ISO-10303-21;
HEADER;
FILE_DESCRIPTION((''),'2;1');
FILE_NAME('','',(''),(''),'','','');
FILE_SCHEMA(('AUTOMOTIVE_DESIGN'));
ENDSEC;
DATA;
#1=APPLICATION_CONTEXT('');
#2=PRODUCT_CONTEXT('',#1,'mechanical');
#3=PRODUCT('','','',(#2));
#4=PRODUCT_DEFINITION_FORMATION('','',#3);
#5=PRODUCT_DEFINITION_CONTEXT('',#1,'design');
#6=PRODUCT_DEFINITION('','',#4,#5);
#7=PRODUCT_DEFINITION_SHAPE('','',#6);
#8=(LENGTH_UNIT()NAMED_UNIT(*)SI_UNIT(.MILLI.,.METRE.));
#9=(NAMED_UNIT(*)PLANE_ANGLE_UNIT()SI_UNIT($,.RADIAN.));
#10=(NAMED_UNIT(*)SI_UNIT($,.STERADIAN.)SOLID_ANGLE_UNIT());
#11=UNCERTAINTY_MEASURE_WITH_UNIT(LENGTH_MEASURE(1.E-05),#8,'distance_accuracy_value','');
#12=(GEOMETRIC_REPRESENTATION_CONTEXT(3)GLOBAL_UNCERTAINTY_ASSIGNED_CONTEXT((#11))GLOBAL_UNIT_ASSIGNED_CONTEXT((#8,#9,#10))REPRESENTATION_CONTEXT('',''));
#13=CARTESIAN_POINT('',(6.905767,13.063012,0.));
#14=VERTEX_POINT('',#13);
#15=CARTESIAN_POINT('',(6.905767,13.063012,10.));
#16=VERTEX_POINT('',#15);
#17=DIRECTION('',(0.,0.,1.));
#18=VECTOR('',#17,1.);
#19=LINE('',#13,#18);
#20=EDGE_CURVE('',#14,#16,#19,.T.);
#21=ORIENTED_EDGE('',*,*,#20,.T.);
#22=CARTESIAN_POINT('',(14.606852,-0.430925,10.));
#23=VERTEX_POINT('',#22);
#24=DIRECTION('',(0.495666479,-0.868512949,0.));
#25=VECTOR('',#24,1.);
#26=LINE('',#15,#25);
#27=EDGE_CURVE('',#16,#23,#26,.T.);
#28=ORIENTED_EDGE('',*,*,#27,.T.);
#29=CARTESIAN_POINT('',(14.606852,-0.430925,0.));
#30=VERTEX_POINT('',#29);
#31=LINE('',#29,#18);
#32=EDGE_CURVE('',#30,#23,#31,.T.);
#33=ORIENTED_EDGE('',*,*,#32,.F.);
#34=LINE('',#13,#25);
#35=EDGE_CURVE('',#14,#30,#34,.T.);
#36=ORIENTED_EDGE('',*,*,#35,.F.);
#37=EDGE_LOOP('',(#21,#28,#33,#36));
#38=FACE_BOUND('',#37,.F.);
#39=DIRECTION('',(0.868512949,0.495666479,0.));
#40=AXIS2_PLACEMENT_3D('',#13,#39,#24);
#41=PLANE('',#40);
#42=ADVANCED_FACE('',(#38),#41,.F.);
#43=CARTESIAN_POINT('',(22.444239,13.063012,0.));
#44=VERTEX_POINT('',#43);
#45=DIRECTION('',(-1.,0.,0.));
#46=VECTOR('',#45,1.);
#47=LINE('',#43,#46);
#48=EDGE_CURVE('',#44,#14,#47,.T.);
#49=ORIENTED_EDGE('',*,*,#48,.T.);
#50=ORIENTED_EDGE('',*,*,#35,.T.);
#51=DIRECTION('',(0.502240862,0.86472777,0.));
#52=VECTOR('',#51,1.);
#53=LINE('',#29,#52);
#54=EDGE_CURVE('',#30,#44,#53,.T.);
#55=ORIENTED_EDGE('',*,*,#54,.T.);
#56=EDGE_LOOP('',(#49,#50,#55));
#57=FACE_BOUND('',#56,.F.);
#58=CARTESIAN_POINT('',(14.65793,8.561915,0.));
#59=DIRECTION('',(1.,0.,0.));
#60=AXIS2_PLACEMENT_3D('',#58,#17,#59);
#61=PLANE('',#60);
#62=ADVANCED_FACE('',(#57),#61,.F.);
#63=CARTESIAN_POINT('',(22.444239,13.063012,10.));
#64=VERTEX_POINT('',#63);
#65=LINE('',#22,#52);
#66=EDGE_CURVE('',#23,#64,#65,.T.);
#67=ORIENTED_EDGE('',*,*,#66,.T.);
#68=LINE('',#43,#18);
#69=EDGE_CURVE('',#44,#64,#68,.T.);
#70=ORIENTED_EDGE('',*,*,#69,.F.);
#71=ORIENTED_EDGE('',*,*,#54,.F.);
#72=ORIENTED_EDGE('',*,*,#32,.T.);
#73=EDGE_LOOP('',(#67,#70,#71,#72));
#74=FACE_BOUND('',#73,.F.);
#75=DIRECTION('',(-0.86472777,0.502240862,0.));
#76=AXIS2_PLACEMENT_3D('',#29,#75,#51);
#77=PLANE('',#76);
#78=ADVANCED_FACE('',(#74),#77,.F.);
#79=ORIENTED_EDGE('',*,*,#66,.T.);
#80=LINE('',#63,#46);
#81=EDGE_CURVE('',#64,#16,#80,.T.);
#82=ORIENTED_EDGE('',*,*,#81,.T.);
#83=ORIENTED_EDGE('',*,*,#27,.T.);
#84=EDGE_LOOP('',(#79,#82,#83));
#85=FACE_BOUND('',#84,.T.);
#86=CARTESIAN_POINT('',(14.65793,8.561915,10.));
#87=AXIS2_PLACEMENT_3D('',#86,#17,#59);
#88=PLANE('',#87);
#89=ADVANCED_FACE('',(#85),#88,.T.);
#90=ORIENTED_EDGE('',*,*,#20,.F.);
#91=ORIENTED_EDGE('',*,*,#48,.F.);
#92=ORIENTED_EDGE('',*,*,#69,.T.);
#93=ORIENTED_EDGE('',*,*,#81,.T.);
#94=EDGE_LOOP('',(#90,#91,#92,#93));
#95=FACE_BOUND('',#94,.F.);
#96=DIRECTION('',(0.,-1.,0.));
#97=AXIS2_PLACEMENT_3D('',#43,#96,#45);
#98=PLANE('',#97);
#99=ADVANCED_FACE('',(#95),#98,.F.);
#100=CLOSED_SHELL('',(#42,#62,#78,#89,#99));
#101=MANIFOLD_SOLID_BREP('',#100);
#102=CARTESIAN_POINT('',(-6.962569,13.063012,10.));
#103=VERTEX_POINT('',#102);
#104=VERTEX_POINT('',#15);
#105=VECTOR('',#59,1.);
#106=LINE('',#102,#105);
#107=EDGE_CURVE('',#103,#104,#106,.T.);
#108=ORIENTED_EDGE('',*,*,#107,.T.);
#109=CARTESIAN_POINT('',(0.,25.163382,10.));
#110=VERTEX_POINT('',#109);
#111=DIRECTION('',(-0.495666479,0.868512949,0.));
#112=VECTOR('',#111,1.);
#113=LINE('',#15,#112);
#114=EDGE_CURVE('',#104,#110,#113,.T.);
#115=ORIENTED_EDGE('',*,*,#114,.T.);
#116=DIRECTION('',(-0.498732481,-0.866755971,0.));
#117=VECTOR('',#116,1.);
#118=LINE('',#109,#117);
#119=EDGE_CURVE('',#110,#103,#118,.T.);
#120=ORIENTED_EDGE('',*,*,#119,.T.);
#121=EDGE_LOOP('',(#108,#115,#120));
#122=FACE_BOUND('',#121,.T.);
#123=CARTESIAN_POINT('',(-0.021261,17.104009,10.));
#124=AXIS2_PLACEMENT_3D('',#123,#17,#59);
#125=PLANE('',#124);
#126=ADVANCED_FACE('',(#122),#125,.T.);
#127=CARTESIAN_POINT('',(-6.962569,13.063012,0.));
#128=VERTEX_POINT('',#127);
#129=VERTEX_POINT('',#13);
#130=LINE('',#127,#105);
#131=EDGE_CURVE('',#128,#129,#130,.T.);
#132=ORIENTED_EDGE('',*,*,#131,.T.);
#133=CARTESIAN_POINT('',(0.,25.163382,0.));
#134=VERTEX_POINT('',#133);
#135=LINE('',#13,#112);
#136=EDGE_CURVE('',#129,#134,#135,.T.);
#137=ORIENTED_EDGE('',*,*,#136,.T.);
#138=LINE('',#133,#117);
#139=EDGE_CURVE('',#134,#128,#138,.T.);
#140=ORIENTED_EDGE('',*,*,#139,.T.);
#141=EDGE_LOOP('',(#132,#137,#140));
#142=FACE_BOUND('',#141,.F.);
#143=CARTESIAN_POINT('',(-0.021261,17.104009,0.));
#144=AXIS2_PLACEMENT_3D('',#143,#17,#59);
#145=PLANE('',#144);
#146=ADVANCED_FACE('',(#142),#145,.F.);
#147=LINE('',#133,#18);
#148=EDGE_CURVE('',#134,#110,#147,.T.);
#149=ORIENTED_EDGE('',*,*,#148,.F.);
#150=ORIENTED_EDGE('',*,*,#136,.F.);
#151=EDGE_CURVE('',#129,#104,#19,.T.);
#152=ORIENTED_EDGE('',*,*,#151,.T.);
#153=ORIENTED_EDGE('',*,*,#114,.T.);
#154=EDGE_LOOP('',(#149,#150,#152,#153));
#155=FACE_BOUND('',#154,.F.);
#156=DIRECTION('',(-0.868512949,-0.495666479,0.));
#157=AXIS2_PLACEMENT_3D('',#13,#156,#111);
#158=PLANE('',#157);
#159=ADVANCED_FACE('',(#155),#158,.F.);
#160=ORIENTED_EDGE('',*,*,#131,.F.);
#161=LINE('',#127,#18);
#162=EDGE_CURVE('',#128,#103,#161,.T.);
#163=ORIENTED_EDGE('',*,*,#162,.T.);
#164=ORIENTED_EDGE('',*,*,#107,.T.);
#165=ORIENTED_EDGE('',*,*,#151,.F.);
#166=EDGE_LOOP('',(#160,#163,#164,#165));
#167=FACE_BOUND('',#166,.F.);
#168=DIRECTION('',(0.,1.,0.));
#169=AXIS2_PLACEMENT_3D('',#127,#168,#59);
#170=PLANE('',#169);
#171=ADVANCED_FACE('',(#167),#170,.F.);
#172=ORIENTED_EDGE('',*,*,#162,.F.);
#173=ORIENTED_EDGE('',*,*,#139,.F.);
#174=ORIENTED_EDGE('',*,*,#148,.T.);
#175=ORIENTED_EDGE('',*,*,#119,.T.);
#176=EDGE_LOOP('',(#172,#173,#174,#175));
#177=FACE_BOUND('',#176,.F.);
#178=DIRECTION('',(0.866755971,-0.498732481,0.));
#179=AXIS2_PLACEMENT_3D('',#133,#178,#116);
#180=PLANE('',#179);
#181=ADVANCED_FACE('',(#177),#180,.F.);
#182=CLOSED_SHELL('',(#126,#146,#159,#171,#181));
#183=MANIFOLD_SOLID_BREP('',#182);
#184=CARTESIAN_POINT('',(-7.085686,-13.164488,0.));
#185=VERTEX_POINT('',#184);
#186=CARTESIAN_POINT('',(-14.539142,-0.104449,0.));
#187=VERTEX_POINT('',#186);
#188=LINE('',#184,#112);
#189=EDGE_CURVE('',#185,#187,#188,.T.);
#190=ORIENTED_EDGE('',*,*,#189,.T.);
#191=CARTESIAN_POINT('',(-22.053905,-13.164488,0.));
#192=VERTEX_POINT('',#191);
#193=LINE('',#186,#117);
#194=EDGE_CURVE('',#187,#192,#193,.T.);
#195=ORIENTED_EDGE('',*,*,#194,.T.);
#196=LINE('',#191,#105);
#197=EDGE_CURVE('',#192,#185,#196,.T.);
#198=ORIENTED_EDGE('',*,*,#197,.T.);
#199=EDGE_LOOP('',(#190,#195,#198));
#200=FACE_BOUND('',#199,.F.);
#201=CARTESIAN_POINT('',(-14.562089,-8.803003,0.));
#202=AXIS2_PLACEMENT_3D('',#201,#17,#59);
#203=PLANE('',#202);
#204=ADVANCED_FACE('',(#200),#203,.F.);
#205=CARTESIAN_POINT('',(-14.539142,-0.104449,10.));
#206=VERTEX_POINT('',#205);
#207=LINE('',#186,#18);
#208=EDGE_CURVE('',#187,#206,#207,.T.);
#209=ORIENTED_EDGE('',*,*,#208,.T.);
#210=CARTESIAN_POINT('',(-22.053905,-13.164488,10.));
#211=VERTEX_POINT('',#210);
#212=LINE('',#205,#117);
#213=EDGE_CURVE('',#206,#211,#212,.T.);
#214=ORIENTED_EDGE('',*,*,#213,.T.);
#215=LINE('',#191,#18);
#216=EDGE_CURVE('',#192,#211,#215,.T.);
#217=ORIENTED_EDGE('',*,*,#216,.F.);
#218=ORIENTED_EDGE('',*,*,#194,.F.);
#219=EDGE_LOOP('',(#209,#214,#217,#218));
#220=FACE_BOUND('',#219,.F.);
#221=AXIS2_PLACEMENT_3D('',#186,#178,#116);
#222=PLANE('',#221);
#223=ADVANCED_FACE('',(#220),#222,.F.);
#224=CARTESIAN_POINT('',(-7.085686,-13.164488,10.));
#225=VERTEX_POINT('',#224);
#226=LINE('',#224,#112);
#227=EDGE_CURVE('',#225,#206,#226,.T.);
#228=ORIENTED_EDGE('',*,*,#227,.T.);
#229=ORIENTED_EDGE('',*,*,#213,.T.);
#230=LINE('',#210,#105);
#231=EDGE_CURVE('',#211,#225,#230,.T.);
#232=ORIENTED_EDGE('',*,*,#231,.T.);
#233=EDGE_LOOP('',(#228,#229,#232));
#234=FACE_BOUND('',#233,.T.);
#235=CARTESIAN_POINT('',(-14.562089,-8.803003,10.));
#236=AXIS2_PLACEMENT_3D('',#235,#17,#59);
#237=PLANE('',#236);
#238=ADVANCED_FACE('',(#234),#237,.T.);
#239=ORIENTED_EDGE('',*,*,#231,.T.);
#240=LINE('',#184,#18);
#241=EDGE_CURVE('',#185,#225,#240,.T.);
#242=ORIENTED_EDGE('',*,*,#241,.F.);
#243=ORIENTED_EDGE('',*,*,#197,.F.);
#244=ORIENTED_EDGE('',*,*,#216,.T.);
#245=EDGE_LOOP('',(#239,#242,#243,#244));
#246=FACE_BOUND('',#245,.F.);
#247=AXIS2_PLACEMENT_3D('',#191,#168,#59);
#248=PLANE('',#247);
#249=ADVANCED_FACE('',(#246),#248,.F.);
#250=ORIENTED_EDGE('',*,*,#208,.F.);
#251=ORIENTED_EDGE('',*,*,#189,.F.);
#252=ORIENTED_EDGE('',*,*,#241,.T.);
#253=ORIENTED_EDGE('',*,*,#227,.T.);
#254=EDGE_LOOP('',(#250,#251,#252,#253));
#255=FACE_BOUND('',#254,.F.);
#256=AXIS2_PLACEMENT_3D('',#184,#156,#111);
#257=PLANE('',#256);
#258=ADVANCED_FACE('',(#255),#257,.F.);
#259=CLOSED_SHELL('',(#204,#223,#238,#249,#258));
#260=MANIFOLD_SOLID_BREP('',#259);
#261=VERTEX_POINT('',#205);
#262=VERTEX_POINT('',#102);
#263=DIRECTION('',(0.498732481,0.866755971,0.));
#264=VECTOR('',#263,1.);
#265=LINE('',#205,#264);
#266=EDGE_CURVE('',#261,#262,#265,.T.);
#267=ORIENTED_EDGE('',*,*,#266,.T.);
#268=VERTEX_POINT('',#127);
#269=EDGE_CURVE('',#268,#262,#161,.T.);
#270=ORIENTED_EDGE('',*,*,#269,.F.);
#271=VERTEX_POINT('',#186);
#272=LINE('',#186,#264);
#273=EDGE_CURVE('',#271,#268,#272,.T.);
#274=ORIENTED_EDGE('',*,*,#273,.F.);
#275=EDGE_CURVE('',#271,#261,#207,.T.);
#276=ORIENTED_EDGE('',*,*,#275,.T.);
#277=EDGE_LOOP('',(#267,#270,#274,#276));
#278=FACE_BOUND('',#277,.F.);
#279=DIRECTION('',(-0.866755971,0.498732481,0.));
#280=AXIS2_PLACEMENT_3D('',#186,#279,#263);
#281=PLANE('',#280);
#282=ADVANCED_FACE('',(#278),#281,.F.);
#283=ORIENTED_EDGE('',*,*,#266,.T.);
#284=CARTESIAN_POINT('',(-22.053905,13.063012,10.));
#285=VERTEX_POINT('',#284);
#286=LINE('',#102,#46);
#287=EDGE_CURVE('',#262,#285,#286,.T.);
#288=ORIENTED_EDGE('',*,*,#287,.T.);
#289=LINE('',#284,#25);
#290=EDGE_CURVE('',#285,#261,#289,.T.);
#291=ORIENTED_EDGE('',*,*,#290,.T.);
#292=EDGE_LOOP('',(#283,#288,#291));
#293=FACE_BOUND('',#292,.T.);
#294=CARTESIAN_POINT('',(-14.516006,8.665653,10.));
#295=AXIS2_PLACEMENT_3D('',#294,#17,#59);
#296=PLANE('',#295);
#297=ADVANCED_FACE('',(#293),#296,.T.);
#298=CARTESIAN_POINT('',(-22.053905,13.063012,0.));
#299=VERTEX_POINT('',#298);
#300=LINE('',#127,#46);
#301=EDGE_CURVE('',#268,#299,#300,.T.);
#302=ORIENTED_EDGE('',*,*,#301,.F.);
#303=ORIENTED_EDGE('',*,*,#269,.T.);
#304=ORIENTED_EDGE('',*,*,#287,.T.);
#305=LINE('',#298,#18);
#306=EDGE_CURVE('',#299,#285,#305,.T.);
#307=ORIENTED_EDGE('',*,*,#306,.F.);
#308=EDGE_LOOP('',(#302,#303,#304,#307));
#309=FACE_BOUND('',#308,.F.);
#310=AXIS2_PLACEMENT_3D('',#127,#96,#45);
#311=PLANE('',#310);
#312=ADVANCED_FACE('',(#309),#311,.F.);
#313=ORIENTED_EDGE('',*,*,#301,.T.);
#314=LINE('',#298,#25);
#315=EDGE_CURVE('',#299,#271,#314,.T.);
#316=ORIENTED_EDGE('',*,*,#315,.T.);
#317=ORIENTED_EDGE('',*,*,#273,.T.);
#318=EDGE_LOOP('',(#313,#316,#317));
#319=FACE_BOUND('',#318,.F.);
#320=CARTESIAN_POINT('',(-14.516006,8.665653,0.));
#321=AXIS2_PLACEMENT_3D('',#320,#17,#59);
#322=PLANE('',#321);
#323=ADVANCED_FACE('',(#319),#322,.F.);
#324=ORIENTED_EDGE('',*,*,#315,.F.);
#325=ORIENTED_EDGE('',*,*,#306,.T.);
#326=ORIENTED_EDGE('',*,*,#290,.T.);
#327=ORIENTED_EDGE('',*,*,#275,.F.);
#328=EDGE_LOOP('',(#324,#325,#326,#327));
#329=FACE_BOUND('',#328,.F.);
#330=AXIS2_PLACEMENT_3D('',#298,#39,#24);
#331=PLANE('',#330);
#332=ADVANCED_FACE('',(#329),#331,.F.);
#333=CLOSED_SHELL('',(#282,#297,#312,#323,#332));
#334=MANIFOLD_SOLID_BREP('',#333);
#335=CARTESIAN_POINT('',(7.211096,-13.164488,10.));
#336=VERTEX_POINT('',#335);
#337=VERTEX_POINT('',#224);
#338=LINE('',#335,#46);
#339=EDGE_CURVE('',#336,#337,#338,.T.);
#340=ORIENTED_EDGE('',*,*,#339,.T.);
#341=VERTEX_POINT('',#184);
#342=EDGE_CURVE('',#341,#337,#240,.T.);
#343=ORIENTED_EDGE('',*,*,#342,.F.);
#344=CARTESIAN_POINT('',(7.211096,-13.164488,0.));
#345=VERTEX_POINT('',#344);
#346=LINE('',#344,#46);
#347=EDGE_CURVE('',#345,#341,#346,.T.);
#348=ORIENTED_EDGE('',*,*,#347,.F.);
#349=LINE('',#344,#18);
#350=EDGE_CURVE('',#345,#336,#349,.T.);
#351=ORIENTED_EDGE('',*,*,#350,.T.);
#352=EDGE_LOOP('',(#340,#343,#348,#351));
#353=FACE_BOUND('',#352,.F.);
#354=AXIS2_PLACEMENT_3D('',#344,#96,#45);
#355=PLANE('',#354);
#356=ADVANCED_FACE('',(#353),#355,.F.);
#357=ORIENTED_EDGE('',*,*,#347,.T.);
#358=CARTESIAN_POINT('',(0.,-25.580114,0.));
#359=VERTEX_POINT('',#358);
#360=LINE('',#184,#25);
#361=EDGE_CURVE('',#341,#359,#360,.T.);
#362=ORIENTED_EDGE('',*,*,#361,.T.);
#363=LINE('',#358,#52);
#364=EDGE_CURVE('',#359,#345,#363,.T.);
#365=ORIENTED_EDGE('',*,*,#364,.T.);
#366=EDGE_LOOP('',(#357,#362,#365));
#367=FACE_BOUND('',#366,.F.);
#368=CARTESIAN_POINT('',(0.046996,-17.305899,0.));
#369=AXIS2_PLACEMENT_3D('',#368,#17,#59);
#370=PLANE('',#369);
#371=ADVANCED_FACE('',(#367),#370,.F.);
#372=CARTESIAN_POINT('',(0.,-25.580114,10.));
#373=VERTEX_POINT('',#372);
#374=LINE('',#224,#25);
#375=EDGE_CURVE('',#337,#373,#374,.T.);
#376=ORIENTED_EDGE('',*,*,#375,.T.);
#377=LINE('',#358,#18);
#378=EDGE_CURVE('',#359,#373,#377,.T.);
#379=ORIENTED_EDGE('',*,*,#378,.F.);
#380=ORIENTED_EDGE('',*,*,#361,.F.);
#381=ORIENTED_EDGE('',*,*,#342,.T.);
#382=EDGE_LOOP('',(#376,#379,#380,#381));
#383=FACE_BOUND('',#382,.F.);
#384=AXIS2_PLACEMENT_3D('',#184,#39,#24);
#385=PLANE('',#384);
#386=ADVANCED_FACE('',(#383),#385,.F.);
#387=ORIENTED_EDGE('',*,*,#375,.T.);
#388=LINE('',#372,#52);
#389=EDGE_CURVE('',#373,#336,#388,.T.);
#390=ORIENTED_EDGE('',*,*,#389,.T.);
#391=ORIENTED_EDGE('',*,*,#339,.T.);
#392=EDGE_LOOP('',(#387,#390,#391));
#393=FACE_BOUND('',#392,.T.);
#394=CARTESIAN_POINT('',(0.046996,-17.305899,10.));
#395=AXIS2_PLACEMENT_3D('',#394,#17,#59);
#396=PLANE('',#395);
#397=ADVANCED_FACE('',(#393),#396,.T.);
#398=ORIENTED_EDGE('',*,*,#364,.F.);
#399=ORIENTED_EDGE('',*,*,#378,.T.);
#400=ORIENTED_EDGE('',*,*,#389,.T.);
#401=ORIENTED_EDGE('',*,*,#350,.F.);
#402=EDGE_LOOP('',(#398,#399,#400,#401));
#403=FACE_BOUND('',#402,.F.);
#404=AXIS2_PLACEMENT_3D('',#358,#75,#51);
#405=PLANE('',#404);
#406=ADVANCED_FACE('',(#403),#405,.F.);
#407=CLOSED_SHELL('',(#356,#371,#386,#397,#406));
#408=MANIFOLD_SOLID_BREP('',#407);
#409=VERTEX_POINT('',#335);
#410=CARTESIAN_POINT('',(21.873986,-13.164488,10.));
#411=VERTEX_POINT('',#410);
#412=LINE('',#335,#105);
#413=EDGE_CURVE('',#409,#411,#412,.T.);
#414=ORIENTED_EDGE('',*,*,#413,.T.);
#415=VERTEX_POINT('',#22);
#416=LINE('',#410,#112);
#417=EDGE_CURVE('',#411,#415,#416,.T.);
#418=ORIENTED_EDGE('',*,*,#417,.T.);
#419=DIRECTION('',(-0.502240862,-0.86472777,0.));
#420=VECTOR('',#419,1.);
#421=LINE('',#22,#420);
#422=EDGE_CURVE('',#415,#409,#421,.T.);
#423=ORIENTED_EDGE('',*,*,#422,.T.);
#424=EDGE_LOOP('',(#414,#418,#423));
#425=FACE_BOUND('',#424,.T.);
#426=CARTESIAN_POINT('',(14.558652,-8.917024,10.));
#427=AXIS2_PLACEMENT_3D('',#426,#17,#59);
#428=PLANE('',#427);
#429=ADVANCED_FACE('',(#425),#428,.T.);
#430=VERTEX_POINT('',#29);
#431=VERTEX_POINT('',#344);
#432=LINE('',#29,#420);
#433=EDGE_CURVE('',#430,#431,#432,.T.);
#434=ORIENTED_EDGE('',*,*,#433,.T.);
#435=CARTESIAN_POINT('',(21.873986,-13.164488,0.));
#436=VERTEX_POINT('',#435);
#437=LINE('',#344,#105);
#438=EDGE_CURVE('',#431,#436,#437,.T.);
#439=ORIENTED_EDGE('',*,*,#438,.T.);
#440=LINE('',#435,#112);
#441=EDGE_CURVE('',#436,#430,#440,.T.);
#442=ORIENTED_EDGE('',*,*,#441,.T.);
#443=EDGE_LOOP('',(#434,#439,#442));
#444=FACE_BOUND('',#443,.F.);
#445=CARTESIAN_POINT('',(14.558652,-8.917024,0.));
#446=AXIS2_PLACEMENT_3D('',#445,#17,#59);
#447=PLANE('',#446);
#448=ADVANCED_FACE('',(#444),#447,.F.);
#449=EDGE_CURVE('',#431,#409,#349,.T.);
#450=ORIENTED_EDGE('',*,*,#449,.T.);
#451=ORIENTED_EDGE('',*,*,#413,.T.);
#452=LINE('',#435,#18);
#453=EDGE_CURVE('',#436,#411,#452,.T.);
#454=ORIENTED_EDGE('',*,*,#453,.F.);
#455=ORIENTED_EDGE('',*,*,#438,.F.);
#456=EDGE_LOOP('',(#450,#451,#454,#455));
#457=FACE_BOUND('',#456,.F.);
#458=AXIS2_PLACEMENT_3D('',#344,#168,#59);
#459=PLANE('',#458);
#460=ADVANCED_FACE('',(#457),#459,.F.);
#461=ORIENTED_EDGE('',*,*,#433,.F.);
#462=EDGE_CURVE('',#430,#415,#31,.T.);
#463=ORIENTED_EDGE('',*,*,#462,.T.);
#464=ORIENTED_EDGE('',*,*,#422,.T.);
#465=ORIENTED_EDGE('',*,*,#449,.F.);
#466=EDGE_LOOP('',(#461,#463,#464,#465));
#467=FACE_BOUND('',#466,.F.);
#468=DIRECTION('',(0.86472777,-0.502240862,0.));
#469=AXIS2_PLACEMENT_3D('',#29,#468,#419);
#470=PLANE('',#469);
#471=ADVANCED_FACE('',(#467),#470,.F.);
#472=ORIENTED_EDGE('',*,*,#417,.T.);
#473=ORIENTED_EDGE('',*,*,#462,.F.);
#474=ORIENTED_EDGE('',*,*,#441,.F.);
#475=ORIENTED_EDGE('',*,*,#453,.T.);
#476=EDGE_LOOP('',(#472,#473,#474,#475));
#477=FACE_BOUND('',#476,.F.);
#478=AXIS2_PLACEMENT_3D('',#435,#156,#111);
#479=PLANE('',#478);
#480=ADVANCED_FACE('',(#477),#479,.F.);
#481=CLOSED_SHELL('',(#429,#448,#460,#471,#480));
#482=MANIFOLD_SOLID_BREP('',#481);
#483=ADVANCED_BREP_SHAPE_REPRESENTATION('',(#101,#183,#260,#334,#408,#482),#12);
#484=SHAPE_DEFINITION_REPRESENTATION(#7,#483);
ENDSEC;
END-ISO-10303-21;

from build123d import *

# Parameters (mm, degrees)
F5_DEPTH = 10


# Not quite as in the source:
# - the program builds the solid bodies; features that only make, move or delete a surface that nothing else refers to are left out


with BuildPart() as f5:
    # F1 (on Top) → F5 (new body)
    with BuildSketch(Plane.XY):
        Polygon((-6.9625685365, 13.063011691), (-22.0539048314, 13.063011691), (-14.5391420015, -0.104448899), align=None)
    extrude(amount=F5_DEPTH)


with BuildPart() as f5b:
    # F1 (on Top) → F5, piece 2 (new body)
    with BuildSketch(Plane.XY):
        Polygon((0, 25.1633822918), (-6.9625685365, 13.063011691), (6.9057670306, 13.063011691), align=None)
    extrude(amount=F5_DEPTH)


with BuildPart() as f5c:
    # F1 (on Top) → F5, piece 3 (new body)
    with BuildSketch(Plane.XY):
        Polygon((22.4442388862, 13.063011691), (6.9057670306, 13.063011691), (14.6068518602, -0.4309246167), align=None)
    extrude(amount=F5_DEPTH)


with BuildPart() as f5d:
    # F1 (on Top) → F5, piece 4 (new body)
    with BuildSketch(Plane.XY):
        Polygon((21.8739863143, -13.1644876968), (14.6068518602, -0.4309246167), (7.2110957366, -13.1644876968), align=None)
    extrude(amount=F5_DEPTH)


with BuildPart() as f5e:
    # F1 (on Top) → F5, piece 5 (new body)
    with BuildSketch(Plane.XY):
        Polygon((7.2110957366, -13.1644876968), (-7.0856855477, -13.1644876968), (0, -25.5801137537), align=None)
    extrude(amount=F5_DEPTH)


with BuildPart() as f5f:
    # F1 (on Top) → F5, piece 6 (new body)
    with BuildSketch(Plane.XY):
        Polygon((-7.0856855477, -13.1644876968), (-14.5391420015, -0.104448899), (-22.0539048314, -13.1644876968), align=None)
    extrude(amount=F5_DEPTH)


solid = Compound([f5.part, f5b.part, f5c.part, f5d.part, f5e.part, f5f.part])
